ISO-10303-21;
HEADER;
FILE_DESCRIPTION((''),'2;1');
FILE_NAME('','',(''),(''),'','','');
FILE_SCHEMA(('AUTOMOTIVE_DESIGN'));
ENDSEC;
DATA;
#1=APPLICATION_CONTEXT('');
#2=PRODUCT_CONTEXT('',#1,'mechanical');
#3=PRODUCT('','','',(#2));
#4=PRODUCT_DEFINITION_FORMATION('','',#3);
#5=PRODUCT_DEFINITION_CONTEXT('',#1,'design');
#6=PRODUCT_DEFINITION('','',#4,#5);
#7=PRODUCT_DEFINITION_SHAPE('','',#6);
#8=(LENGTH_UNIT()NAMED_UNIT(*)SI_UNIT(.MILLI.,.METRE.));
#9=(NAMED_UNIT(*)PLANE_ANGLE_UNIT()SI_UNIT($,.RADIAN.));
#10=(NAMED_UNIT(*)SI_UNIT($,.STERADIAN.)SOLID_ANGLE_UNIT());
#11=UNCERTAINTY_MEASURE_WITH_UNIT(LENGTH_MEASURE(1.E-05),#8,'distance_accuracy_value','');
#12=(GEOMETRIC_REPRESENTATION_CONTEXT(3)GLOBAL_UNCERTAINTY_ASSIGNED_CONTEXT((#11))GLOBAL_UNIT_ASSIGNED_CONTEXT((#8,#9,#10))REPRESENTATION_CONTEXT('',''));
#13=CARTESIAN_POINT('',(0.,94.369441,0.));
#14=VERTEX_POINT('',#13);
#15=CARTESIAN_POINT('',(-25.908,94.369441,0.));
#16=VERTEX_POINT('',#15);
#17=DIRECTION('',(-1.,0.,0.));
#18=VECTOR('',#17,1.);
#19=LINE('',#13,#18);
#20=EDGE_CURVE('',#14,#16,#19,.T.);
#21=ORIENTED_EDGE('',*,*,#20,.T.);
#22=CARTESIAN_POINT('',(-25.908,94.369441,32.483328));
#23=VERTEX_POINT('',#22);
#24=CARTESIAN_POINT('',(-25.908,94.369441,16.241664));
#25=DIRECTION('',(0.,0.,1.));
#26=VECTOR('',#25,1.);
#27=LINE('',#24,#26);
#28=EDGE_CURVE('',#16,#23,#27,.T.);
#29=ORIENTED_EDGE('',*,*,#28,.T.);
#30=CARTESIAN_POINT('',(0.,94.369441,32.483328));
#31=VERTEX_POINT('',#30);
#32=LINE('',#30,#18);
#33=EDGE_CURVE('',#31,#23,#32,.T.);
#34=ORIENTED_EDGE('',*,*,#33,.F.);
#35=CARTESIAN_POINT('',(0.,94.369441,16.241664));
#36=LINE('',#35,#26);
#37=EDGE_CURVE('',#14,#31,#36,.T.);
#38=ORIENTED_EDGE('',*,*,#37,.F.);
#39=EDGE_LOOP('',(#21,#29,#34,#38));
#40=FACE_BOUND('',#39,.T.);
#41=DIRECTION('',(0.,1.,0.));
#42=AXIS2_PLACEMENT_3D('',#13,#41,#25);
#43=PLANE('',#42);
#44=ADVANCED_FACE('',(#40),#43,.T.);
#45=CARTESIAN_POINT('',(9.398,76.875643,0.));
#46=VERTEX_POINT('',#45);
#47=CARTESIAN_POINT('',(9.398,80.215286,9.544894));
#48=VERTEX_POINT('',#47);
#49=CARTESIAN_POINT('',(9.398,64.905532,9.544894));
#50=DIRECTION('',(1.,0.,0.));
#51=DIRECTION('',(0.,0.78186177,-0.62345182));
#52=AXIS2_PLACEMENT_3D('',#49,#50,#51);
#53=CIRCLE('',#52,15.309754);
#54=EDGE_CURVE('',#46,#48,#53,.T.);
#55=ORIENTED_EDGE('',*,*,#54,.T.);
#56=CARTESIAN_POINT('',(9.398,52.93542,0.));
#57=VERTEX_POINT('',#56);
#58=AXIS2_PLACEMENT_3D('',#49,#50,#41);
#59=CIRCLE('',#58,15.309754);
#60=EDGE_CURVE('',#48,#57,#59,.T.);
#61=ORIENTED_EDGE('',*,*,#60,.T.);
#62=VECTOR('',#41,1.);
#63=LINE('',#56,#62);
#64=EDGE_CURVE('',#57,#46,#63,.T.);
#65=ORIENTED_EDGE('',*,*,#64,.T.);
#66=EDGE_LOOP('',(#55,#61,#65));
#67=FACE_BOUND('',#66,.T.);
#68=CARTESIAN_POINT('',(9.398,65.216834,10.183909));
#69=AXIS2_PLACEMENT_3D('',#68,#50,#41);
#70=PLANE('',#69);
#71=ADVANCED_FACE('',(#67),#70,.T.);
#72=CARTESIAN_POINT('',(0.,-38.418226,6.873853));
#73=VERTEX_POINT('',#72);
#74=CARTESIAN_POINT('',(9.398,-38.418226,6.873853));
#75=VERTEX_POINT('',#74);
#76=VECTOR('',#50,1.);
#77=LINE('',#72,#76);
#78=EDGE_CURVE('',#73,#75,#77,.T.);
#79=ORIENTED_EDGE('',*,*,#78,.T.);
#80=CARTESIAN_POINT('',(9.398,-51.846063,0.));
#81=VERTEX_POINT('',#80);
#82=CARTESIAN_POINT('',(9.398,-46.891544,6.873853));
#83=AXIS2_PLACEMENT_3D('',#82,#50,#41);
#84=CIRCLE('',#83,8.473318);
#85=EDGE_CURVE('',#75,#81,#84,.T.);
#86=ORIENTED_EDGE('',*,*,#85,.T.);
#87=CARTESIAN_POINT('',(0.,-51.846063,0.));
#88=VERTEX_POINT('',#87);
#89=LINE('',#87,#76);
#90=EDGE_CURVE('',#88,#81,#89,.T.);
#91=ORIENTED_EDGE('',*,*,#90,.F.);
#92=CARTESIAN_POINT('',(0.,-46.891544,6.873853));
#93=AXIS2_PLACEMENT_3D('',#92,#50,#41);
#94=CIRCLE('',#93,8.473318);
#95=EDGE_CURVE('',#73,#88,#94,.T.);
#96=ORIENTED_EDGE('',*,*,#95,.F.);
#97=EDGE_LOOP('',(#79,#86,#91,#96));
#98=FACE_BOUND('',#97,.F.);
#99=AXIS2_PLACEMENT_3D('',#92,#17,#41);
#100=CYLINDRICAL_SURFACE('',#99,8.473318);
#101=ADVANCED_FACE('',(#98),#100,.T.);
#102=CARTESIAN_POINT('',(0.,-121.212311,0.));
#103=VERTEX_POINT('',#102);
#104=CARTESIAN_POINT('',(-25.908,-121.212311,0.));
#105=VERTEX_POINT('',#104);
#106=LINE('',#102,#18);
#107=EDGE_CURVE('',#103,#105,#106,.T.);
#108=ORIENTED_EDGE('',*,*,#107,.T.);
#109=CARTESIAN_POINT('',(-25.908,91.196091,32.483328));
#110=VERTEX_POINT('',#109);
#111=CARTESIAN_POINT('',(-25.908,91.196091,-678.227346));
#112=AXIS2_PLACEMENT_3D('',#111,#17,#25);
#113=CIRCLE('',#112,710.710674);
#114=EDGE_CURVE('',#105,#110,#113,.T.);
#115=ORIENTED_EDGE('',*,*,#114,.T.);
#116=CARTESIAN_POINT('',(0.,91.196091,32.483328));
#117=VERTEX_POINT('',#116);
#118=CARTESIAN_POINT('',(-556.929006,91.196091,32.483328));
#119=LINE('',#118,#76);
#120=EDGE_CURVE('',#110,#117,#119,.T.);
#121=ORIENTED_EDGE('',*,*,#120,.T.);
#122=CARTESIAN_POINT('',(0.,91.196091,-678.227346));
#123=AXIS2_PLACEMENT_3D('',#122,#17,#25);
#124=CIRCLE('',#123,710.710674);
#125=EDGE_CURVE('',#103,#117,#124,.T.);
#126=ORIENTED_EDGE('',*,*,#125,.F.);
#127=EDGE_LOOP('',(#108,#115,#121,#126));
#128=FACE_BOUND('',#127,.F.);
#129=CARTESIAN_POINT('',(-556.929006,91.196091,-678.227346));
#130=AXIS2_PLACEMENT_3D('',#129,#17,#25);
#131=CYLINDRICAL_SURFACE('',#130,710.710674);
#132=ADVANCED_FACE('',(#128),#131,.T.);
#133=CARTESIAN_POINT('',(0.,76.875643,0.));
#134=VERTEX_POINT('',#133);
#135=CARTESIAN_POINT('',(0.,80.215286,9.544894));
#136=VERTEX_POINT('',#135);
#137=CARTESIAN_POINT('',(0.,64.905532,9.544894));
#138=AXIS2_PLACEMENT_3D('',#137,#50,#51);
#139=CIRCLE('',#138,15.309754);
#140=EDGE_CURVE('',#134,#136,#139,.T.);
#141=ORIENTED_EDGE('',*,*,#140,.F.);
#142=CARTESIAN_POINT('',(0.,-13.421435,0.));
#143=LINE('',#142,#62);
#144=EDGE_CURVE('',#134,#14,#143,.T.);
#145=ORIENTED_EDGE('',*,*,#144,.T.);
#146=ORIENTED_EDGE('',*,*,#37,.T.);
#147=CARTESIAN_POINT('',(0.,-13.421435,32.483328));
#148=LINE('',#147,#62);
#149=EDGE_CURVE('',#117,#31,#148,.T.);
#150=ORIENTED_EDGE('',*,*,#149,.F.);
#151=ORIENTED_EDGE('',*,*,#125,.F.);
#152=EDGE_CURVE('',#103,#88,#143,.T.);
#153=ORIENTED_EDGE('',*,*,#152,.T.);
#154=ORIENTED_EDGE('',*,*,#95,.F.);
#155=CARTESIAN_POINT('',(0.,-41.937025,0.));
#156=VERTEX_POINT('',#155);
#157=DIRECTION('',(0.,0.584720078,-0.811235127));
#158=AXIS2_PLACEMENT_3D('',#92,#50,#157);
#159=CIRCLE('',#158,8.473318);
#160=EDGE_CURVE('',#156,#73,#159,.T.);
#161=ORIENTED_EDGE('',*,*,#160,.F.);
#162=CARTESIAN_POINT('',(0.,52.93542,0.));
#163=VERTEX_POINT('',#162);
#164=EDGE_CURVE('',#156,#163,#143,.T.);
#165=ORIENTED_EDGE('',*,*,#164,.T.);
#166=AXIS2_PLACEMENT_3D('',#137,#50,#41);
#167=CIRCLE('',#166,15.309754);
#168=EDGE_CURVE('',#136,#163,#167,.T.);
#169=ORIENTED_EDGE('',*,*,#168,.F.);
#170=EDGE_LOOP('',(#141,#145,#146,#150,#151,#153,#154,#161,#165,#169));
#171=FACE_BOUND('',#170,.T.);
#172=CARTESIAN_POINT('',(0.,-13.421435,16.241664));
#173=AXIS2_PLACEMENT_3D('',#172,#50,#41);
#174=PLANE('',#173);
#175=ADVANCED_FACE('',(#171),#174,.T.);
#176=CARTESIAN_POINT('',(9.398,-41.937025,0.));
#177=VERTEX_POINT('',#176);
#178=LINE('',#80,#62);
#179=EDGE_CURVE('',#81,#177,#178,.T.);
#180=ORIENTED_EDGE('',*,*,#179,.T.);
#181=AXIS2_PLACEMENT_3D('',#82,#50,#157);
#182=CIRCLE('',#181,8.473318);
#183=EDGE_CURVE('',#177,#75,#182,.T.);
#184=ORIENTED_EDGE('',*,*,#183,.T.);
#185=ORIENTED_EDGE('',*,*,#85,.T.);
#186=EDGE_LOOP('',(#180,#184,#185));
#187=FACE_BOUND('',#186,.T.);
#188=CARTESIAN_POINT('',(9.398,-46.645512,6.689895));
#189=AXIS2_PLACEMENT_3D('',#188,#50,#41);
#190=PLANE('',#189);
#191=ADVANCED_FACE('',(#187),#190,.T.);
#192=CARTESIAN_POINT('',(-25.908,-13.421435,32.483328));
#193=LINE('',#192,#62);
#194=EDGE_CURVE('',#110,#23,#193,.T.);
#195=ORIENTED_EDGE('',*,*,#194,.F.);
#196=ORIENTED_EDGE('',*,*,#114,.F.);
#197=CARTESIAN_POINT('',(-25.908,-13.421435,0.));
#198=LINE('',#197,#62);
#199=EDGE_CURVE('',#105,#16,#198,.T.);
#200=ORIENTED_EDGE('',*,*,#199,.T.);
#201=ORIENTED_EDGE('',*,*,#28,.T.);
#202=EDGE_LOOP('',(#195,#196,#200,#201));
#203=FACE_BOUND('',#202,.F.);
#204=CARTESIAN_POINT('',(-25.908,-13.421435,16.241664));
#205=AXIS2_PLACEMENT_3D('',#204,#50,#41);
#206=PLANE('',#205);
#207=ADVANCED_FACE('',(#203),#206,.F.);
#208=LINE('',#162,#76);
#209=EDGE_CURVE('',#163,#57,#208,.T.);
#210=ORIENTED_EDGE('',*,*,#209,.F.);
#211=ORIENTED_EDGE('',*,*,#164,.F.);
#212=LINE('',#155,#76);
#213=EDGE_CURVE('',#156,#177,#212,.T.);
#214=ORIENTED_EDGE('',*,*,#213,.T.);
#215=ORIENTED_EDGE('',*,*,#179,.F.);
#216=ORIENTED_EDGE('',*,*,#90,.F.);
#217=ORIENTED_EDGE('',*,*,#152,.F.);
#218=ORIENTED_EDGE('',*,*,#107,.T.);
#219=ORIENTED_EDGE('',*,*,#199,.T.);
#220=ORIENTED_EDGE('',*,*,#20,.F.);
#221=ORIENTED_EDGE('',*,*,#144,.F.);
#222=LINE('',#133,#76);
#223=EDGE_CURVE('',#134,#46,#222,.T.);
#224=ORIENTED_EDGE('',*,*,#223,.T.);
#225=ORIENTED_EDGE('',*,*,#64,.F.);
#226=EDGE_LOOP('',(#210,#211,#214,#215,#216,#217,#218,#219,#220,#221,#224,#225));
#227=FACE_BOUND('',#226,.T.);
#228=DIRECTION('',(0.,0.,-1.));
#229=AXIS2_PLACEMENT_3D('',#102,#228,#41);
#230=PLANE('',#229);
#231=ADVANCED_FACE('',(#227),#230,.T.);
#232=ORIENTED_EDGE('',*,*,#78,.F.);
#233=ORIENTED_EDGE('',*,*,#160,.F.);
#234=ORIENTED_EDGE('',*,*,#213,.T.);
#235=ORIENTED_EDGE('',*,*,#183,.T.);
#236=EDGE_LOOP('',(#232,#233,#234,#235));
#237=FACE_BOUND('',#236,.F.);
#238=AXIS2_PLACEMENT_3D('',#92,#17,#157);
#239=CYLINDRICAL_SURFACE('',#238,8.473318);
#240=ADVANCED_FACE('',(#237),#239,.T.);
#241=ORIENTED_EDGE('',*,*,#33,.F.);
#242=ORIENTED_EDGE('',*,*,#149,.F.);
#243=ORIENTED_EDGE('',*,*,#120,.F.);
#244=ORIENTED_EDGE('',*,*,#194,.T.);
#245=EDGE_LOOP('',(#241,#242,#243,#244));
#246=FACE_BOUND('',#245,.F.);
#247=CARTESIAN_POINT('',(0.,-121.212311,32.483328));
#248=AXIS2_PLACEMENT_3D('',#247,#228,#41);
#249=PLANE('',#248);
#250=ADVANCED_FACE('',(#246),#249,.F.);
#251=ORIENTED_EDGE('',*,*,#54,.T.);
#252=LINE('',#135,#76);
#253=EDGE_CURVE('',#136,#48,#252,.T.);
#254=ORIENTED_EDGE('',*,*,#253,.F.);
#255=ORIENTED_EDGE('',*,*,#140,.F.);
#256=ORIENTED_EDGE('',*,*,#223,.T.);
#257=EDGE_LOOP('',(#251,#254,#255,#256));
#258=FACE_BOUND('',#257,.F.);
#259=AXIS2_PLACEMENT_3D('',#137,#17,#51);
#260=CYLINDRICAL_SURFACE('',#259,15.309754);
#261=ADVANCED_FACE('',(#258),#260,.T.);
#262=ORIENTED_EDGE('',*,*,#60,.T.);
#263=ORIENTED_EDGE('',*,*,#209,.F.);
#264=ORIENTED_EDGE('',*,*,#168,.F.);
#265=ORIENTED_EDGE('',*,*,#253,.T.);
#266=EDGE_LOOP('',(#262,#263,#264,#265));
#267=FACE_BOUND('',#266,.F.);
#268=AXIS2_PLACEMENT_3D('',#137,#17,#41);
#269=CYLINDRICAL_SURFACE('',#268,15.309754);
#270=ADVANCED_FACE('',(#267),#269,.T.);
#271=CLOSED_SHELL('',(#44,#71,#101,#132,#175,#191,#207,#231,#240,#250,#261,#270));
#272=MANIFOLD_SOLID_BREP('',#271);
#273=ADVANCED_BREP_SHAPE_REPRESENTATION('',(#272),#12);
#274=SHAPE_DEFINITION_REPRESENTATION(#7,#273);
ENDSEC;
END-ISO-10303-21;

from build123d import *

# Parameters (mm, degrees)
F0_W        = 215.5817523599
F0_H        = 32.4833281338
F1_DEPTH    = 25.908
F2_T1_DEPTH = 1087.9500123763
F4_DEPTH    = 9.398


# Not quite as in the source:
# - a fillet or chamfer that OpenCascade refuses, or shapes differently, is made with other operations: its cross-section is extruded or revolved along the edge and cut away or added


with BuildPart() as f1:
    # F0 (on Right) → F1 (new body)
    with BuildSketch(Plane.YZ):
        with Locations((-13.4214349091, 16.2416640669)):
            Rectangle(F0_W, F0_H)
    extrude(amount=-F1_DEPTH)

    # F2: fillet of radius 710.7106737728 on 1 edges, made by hand

    # F2_s2 → F2_t1 (cut)
    with BuildSketch(Plane.YZ.offset(-556.9290061881)):
        with BuildLine():
            ThreePointArc((91.1960913862, 32.4833281338), (-16.2428401618, 24.3155625185), (-121.212311089, 0))
            Line((-121.212311089, 0), (-121.212311089, 32.4833281338))
            Line((-121.212311089, 32.4833281338), (91.1960913862, 32.4833281338))
        make_face()
    extrude(amount=F2_T1_DEPTH, mode=Mode.SUBTRACT)

    # F3 (on face) → F4 (join)
    with BuildSketch(Plane.YZ):
        with BuildLine():
            ThreePointArc((-41.9370249708, 0), (-39.3490534124, 3.0127715747), (-38.4182262134, 6.873853039))
            ThreePointArc((-38.4182262134, 6.873853039), (-50.7526254785, 14.4163436408), (-51.8460630576, 0))
            Line((-51.8460630576, 0), (-41.9370249708, 0))
        make_face()
        with BuildLine():
            ThreePointArc((80.2152858595, 9.5448940992), (59.8493914636, 23.9956386528), (52.9354202211, 0))
            Line((52.9354202211, 0), (76.8756431877, 0))
            ThreePointArc((76.8756431877, 0), (79.356276258, 4.4887538584), (80.2152858595, 9.5448940992))
        make_face()
    extrude(amount=F4_DEPTH)


solid = f1.part
